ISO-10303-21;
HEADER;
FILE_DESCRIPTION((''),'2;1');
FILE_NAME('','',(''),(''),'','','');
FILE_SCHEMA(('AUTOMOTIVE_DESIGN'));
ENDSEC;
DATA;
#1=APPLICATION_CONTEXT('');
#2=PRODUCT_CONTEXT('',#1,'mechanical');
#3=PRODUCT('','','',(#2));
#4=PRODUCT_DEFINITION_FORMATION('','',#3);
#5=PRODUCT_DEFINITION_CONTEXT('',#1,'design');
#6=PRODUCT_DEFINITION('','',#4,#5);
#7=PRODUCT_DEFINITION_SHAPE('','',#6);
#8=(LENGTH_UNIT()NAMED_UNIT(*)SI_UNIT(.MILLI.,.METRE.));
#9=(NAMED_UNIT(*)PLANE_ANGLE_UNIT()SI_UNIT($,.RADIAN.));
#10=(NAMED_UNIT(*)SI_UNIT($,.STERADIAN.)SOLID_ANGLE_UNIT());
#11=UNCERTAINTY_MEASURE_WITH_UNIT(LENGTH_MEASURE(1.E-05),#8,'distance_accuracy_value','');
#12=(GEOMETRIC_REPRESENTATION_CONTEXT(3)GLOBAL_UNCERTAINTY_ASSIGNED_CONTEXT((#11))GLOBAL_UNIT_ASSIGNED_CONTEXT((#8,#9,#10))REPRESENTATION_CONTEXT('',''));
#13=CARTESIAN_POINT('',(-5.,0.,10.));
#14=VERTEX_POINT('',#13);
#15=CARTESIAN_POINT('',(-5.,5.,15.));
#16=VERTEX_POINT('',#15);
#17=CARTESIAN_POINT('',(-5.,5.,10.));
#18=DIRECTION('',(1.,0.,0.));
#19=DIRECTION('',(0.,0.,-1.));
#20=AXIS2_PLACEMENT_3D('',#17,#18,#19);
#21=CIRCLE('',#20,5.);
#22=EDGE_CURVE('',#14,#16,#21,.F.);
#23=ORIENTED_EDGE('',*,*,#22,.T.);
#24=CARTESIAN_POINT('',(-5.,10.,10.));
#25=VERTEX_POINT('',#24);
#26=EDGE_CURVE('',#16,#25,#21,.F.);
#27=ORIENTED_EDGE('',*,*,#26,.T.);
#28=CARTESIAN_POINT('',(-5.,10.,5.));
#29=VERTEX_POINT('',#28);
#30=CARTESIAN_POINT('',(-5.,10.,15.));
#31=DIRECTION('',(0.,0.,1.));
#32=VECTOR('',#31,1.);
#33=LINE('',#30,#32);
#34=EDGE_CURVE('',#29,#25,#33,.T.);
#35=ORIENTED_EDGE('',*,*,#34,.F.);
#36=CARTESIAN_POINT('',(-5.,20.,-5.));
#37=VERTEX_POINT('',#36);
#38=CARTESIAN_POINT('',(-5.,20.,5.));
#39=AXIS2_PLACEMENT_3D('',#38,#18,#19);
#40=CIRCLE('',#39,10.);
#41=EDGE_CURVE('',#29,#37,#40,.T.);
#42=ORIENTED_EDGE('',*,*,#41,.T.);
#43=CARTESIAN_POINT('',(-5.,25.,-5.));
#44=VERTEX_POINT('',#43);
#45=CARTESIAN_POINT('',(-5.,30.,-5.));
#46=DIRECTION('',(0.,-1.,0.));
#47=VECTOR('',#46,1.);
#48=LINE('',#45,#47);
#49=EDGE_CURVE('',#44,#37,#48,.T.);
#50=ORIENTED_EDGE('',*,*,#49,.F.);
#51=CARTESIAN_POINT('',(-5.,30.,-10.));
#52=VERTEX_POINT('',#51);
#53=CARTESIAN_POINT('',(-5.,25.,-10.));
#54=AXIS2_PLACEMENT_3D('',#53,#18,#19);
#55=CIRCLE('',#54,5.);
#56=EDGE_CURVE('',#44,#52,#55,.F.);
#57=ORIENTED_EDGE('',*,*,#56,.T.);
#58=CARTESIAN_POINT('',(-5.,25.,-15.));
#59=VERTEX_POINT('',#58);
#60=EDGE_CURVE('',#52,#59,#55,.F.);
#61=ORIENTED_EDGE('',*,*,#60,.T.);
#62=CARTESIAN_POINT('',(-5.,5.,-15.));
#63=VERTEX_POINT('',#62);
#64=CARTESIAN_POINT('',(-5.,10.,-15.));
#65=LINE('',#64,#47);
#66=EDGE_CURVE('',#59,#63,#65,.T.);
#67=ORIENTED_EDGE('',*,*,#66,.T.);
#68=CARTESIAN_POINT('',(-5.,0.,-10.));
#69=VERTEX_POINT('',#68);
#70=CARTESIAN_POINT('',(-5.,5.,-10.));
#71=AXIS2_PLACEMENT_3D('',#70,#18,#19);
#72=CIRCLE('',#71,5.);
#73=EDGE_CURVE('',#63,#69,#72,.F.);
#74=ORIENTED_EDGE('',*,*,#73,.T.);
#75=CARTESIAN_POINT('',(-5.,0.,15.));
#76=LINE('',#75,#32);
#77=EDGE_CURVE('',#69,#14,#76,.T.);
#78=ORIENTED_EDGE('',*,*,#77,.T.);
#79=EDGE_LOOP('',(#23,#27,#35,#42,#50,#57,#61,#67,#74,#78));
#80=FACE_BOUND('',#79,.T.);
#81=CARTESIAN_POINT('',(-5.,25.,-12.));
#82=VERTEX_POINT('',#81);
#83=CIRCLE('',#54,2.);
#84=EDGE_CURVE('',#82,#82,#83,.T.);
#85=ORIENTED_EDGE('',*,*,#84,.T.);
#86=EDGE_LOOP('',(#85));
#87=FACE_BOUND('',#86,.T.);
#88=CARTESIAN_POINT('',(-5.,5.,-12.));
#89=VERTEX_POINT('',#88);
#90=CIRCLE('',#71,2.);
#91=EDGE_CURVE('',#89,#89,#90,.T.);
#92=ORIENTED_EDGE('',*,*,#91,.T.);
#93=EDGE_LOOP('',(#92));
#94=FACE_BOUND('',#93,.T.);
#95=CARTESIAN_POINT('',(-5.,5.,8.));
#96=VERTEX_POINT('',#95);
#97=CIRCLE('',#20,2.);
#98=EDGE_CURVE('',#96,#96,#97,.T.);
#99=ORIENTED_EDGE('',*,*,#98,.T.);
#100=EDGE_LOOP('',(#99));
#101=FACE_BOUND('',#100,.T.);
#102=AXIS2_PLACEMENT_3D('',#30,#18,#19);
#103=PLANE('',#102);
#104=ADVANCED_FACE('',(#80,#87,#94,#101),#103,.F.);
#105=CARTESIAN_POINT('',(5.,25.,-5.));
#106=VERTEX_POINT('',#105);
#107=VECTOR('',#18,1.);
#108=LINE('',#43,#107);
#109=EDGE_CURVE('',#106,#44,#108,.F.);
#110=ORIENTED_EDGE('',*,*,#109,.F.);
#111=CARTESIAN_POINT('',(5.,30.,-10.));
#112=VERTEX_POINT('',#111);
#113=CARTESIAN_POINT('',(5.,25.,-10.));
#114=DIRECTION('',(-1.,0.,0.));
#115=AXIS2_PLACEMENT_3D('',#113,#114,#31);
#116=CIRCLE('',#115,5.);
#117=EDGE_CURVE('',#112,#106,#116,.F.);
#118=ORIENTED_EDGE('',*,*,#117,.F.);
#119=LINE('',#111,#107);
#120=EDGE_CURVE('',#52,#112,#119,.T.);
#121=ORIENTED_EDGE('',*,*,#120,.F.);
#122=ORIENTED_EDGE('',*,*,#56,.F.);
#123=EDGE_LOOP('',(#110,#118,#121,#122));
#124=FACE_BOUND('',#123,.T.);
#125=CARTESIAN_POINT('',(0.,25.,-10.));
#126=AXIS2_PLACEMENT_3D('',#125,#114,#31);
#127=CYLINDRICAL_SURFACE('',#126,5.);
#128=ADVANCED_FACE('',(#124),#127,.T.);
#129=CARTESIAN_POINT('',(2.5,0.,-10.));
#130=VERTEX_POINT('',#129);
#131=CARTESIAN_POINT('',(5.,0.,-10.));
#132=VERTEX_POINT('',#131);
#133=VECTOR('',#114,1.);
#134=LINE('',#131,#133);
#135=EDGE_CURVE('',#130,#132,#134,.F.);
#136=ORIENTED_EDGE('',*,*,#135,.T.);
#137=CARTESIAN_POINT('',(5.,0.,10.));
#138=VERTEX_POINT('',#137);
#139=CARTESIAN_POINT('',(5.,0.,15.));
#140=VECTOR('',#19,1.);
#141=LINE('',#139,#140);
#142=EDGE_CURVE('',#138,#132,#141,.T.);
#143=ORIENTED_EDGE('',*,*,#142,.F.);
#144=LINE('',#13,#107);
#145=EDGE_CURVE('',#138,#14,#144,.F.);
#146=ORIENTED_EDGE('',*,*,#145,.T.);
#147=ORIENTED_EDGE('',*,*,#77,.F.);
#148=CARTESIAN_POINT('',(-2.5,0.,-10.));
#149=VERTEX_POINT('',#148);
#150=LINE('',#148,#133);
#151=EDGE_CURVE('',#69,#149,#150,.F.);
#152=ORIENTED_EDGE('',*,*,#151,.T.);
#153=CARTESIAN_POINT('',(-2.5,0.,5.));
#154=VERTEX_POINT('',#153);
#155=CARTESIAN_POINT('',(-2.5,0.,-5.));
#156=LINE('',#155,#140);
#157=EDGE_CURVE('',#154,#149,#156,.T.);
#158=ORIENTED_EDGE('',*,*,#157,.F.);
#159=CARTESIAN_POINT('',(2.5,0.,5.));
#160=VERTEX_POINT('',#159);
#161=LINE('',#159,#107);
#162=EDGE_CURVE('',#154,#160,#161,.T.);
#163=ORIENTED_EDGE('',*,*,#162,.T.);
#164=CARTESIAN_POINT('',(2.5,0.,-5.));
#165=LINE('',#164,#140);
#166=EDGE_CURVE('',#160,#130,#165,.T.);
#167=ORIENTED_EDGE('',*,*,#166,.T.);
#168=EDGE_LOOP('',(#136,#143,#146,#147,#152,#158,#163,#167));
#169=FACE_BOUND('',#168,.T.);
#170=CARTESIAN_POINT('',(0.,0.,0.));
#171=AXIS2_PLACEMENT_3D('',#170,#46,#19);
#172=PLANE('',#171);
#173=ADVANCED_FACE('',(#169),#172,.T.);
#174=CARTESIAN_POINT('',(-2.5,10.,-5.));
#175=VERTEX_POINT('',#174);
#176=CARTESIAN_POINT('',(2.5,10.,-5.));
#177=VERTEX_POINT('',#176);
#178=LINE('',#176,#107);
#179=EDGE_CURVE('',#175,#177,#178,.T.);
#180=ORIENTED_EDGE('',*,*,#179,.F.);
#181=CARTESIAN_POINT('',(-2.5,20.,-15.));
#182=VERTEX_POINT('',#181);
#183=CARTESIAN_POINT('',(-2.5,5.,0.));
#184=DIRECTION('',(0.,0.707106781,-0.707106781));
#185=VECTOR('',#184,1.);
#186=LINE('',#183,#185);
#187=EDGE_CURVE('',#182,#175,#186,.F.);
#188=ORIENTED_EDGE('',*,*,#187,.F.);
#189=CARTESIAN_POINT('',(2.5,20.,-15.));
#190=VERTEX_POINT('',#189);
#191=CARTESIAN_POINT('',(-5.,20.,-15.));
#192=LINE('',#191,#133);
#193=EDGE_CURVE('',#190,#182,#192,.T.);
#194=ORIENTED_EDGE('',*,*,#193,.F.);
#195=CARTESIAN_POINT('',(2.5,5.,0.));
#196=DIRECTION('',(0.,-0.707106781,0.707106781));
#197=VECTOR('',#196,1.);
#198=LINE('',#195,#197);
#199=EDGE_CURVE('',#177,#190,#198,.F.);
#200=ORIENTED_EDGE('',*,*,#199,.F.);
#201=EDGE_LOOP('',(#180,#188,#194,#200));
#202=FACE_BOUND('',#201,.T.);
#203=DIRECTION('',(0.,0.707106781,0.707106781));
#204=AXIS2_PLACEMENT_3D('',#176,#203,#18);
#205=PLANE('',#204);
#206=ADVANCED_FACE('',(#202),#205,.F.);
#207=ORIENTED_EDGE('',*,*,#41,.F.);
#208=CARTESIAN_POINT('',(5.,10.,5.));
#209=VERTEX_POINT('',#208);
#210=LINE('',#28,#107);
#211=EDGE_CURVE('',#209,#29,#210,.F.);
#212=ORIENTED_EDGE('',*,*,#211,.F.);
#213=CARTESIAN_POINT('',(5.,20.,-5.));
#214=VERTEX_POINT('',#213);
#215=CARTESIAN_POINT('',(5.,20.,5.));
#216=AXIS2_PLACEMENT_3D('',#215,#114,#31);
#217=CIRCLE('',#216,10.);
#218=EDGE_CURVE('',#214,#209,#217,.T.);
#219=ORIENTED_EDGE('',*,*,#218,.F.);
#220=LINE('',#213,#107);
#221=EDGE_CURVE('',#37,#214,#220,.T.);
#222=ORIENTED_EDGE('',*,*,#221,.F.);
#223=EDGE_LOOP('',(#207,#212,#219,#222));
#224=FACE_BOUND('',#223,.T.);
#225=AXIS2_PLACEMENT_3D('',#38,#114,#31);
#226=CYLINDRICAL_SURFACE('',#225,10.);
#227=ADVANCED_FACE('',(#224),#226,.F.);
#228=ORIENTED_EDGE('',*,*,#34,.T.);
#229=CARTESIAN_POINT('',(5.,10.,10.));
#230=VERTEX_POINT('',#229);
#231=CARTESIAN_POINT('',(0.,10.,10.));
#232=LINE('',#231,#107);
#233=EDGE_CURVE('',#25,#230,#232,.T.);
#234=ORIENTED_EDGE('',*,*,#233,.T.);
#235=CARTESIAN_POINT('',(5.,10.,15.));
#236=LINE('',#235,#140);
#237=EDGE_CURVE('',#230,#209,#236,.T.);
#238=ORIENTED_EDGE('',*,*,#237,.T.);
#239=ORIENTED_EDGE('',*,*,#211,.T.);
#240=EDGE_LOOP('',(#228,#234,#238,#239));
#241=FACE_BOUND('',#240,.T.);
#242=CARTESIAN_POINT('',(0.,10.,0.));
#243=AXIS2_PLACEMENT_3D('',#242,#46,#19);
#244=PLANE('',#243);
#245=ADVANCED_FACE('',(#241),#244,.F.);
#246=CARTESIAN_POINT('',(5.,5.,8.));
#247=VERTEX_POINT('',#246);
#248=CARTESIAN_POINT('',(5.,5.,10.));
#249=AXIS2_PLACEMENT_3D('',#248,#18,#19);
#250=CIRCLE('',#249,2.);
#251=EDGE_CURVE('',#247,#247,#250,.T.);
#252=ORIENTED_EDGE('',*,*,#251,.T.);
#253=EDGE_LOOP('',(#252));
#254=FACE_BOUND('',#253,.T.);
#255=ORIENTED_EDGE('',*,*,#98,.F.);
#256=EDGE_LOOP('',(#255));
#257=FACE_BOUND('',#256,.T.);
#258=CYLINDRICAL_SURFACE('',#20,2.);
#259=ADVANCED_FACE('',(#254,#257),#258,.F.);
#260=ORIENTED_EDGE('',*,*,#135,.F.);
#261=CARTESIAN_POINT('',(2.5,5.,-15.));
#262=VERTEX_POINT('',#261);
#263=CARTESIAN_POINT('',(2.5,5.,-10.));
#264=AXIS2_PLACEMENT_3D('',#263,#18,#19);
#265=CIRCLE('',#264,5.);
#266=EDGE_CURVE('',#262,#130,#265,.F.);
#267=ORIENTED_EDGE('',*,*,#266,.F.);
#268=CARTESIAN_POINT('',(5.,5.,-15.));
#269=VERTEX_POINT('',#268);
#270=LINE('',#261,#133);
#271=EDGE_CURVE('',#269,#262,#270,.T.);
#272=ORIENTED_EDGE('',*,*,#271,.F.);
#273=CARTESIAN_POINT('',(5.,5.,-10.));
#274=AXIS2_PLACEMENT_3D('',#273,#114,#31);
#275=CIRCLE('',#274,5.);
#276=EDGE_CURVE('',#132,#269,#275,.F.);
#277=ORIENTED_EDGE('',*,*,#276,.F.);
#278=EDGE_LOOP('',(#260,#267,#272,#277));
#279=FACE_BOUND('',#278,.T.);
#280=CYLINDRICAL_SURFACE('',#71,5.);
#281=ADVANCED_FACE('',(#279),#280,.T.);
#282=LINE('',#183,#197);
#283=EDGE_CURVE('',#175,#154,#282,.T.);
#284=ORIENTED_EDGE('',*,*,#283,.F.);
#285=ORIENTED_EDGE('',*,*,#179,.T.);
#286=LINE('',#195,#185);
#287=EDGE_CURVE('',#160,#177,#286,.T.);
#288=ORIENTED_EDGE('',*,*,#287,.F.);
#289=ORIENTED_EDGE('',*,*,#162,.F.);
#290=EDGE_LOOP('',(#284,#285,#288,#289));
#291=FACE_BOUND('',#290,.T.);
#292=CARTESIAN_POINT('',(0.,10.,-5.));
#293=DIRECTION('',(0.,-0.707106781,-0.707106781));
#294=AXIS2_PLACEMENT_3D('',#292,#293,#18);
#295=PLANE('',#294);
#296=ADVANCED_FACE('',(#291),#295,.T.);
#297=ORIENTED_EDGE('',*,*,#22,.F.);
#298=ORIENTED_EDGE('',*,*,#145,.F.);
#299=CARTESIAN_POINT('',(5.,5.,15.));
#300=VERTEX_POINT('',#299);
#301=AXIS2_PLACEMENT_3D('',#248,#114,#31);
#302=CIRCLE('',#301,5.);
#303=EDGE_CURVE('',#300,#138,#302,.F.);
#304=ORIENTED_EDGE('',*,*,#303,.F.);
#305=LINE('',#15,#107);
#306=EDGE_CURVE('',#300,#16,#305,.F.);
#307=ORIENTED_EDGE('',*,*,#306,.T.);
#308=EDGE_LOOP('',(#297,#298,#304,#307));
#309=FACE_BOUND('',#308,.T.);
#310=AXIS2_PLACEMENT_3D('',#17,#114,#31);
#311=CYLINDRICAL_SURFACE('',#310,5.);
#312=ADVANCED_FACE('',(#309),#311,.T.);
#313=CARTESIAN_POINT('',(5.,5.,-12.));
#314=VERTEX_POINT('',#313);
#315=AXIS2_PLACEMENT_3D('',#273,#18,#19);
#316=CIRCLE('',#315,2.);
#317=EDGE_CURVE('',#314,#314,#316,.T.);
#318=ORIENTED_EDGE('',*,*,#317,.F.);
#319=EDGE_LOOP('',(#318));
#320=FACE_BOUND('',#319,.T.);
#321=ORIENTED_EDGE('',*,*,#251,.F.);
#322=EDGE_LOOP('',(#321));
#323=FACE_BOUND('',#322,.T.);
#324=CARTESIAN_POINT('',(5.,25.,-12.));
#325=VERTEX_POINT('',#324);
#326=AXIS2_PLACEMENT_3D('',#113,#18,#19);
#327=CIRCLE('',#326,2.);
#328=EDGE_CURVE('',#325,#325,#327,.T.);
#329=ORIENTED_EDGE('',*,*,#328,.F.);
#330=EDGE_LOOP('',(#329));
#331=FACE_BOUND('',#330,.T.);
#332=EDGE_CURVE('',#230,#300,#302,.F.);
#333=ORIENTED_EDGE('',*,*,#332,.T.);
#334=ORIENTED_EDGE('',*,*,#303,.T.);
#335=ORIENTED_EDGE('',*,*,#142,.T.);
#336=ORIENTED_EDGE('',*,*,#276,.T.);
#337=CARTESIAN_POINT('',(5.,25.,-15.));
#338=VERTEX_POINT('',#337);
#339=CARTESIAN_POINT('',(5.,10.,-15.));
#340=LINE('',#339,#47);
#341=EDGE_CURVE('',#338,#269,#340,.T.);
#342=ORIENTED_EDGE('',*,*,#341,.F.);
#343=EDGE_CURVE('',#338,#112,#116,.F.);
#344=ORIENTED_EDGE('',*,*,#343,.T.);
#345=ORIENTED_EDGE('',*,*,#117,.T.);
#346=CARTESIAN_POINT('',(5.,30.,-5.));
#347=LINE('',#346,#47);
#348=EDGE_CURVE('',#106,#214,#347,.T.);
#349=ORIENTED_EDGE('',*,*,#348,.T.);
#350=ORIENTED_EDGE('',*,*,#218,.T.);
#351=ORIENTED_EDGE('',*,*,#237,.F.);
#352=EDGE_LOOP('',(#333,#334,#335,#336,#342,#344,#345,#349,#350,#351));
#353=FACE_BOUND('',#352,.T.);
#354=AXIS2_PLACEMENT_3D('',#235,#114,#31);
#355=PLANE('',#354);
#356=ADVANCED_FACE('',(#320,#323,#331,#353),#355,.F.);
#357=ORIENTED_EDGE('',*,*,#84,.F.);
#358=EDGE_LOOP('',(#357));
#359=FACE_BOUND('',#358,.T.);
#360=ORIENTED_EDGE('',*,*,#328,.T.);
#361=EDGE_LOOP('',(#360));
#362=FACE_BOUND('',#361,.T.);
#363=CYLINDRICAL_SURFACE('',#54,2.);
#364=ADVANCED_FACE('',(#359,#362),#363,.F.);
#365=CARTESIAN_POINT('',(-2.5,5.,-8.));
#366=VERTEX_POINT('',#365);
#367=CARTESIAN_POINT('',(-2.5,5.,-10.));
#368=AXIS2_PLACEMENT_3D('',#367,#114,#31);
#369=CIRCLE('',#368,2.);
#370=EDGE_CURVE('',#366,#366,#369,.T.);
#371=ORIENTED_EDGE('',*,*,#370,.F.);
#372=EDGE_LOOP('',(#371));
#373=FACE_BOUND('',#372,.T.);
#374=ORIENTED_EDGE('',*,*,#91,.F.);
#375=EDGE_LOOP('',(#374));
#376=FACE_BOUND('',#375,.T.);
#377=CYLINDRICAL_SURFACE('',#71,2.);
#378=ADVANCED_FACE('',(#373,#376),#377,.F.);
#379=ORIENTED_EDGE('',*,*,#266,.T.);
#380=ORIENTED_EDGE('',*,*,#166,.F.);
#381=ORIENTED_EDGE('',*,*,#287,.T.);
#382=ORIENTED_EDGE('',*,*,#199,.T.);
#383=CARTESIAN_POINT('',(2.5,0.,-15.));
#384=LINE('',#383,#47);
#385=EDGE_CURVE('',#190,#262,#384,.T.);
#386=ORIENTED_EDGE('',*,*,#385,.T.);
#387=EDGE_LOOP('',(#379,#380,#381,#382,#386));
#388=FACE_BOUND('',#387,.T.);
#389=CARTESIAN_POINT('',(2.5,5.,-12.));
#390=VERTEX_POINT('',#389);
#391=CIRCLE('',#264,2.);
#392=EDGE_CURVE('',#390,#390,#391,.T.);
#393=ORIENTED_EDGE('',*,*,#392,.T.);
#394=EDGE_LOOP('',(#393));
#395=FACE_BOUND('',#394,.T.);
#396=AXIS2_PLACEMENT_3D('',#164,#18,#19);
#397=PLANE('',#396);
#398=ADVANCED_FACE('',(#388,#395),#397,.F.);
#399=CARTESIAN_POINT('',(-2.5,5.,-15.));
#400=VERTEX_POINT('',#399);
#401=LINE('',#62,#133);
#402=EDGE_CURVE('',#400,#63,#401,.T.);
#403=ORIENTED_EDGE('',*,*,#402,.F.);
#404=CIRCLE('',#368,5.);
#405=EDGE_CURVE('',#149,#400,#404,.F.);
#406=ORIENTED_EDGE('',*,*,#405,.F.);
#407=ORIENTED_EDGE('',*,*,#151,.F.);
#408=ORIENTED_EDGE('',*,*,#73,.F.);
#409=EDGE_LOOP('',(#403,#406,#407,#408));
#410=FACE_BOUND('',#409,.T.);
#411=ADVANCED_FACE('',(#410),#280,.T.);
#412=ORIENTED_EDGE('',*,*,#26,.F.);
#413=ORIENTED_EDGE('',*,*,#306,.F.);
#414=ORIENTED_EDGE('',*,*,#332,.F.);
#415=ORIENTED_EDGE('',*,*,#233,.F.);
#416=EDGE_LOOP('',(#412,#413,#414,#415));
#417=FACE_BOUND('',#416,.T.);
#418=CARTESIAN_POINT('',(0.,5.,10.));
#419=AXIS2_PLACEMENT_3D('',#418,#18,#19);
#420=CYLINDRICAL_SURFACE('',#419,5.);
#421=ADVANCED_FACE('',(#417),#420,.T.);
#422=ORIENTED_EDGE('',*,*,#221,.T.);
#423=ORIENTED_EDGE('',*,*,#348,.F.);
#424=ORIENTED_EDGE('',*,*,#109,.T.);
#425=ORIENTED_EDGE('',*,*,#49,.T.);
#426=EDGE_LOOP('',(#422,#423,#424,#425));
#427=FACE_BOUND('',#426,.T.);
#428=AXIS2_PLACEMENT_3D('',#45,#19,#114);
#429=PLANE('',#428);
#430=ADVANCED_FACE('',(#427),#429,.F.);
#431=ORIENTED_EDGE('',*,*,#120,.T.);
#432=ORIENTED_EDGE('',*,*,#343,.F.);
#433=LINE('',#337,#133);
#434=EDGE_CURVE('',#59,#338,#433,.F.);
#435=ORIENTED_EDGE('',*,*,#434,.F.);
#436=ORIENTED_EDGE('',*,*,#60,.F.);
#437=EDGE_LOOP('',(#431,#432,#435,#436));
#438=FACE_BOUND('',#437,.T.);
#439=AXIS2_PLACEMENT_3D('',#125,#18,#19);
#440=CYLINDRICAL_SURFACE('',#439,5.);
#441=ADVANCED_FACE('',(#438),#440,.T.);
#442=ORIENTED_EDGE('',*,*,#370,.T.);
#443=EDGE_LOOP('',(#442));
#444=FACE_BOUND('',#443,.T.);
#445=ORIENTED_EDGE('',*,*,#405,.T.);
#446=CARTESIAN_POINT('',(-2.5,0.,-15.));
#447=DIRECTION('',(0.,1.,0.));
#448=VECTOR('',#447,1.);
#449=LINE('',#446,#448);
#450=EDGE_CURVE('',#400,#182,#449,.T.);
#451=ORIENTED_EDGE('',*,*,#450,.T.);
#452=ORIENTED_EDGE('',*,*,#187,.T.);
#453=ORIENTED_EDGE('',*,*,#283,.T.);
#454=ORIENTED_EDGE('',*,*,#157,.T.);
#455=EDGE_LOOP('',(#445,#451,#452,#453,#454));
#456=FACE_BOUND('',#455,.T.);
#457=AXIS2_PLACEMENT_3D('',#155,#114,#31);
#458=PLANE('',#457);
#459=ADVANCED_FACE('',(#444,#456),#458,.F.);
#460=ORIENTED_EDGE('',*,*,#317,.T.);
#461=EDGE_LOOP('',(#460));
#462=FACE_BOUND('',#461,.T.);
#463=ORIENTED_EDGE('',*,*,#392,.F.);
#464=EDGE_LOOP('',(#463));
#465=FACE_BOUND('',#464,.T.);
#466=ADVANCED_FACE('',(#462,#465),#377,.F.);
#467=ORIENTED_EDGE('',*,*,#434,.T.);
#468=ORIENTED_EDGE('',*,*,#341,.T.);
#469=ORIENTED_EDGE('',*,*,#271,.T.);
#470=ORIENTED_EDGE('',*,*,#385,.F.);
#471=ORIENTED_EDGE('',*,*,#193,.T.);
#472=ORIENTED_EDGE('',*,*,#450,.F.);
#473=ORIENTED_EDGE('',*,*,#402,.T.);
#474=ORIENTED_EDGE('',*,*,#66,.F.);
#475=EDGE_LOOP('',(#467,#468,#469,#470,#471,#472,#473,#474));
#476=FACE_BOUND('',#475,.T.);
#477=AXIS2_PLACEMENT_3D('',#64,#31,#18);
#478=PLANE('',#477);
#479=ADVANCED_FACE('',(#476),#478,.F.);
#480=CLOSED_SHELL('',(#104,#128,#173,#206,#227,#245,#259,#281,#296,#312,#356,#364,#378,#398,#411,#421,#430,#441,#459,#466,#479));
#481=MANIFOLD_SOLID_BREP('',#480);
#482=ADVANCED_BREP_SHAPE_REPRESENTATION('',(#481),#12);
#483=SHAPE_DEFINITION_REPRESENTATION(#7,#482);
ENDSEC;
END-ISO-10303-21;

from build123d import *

# Parameters (mm, degrees)
SKETCH1_W           = 10
SKETCH1_H           = 30
BOSS_EXTRUDE1_DEPTH = 10
SKETCH2_W           = 10
SKETCH2_H           = 10
BOSS_EXTRUDE2_DEPTH = 20
SKETCH3_R           = 2
CUT_EXTRUDE1_DEPTH  = 36
FILLET1_R           = 5
FILLET2_R           = 10
SKETCH6_W           = 5
SKETCH6_H           = 10
CUT_EXTRUDE3_DEPTH  = 10
CHAMFER1_SIZE       = 10
SKETCH4_R           = 2
CUT_EXTRUDE4_DEPTH  = 36
FILLET3_R           = 5


with BuildPart() as part:
    # Sketch1 → Boss-Extrude1 (new body)
    with BuildSketch(Plane(origin=(0, 0, 0), x_dir=(1, 0, 0), z_dir=(0, 1, 0))):
        Rectangle(SKETCH1_W, SKETCH1_H)
    extrude(amount=BOSS_EXTRUDE1_DEPTH)

    # Sketch2 → Boss-Extrude2 (add)
    with BuildSketch(Plane(origin=(0, 10, 0), x_dir=(1, 0, 0), z_dir=(0, 1, 0))):
        with Locations((0, 10)):
            Rectangle(SKETCH2_W, SKETCH2_H)
    extrude(amount=BOSS_EXTRUDE2_DEPTH)

    # Sketch3 → Cut-Extrude1 (cut, through all)
    with BuildSketch(Plane(origin=(5, 0, 0), x_dir=(0, 0, -1), z_dir=(1, 0, 0))):
        with Locations((-10, 5)):
            Circle(SKETCH3_R)
        with Locations((10, 25)):
            Circle(SKETCH3_R)
    extrude(amount=-CUT_EXTRUDE1_DEPTH, mode=Mode.SUBTRACT)

    # Fillet1
    fillet1_edges = [part.edges().sort_by_distance(p)[0] for p in [
        (0, 30, -15),
        (0, 30, -5),
        (0, 0, 15),
        (0, 10, 15),
    ]]
    fillet(fillet1_edges, radius=FILLET1_R - 0.0001)  # a hair under: the kernel refuses the full size

    # Fillet2
    fillet2_edges = [part.edges().sort_by_distance(p)[0] for p in [
        (0, 10, -5),
    ]]
    fillet(fillet2_edges, radius=FILLET2_R)

    # Sketch6 → Cut-Extrude3 (cut)
    with BuildSketch(Plane(origin=(0, 0, -15), x_dir=(-1, 0, 0), z_dir=(0, 0, -1))):
        with Locations((0, 5)):
            Rectangle(SKETCH6_W, SKETCH6_H)
    extrude(amount=-CUT_EXTRUDE3_DEPTH, mode=Mode.SUBTRACT)

    # Chamfer1
    chamfer1_edges = [part.edges().sort_by_distance(p)[0] for p in [
        (0, 0, -5),
        (0, 10, -15),
    ]]
    chamfer(chamfer1_edges, length=CHAMFER1_SIZE - 0.0001)  # a hair under: the kernel refuses the full size

    # Sketch4 → Cut-Extrude4 (cut, through all)
    with BuildSketch(Plane(origin=(5, 0, 0), x_dir=(0, 0, -1), z_dir=(1, 0, 0))):
        with Locations((10, 5)):
            Circle(SKETCH4_R)
    extrude(amount=-CUT_EXTRUDE4_DEPTH, mode=Mode.SUBTRACT)

    # Fillet3
    fillet3_edges = [part.edges().sort_by_distance(p)[0] for p in [
        (3.75, 0, -15),
        (-3.75, 0, -15),
    ]]
    fillet(fillet3_edges, radius=FILLET3_R)


solid = part.part
